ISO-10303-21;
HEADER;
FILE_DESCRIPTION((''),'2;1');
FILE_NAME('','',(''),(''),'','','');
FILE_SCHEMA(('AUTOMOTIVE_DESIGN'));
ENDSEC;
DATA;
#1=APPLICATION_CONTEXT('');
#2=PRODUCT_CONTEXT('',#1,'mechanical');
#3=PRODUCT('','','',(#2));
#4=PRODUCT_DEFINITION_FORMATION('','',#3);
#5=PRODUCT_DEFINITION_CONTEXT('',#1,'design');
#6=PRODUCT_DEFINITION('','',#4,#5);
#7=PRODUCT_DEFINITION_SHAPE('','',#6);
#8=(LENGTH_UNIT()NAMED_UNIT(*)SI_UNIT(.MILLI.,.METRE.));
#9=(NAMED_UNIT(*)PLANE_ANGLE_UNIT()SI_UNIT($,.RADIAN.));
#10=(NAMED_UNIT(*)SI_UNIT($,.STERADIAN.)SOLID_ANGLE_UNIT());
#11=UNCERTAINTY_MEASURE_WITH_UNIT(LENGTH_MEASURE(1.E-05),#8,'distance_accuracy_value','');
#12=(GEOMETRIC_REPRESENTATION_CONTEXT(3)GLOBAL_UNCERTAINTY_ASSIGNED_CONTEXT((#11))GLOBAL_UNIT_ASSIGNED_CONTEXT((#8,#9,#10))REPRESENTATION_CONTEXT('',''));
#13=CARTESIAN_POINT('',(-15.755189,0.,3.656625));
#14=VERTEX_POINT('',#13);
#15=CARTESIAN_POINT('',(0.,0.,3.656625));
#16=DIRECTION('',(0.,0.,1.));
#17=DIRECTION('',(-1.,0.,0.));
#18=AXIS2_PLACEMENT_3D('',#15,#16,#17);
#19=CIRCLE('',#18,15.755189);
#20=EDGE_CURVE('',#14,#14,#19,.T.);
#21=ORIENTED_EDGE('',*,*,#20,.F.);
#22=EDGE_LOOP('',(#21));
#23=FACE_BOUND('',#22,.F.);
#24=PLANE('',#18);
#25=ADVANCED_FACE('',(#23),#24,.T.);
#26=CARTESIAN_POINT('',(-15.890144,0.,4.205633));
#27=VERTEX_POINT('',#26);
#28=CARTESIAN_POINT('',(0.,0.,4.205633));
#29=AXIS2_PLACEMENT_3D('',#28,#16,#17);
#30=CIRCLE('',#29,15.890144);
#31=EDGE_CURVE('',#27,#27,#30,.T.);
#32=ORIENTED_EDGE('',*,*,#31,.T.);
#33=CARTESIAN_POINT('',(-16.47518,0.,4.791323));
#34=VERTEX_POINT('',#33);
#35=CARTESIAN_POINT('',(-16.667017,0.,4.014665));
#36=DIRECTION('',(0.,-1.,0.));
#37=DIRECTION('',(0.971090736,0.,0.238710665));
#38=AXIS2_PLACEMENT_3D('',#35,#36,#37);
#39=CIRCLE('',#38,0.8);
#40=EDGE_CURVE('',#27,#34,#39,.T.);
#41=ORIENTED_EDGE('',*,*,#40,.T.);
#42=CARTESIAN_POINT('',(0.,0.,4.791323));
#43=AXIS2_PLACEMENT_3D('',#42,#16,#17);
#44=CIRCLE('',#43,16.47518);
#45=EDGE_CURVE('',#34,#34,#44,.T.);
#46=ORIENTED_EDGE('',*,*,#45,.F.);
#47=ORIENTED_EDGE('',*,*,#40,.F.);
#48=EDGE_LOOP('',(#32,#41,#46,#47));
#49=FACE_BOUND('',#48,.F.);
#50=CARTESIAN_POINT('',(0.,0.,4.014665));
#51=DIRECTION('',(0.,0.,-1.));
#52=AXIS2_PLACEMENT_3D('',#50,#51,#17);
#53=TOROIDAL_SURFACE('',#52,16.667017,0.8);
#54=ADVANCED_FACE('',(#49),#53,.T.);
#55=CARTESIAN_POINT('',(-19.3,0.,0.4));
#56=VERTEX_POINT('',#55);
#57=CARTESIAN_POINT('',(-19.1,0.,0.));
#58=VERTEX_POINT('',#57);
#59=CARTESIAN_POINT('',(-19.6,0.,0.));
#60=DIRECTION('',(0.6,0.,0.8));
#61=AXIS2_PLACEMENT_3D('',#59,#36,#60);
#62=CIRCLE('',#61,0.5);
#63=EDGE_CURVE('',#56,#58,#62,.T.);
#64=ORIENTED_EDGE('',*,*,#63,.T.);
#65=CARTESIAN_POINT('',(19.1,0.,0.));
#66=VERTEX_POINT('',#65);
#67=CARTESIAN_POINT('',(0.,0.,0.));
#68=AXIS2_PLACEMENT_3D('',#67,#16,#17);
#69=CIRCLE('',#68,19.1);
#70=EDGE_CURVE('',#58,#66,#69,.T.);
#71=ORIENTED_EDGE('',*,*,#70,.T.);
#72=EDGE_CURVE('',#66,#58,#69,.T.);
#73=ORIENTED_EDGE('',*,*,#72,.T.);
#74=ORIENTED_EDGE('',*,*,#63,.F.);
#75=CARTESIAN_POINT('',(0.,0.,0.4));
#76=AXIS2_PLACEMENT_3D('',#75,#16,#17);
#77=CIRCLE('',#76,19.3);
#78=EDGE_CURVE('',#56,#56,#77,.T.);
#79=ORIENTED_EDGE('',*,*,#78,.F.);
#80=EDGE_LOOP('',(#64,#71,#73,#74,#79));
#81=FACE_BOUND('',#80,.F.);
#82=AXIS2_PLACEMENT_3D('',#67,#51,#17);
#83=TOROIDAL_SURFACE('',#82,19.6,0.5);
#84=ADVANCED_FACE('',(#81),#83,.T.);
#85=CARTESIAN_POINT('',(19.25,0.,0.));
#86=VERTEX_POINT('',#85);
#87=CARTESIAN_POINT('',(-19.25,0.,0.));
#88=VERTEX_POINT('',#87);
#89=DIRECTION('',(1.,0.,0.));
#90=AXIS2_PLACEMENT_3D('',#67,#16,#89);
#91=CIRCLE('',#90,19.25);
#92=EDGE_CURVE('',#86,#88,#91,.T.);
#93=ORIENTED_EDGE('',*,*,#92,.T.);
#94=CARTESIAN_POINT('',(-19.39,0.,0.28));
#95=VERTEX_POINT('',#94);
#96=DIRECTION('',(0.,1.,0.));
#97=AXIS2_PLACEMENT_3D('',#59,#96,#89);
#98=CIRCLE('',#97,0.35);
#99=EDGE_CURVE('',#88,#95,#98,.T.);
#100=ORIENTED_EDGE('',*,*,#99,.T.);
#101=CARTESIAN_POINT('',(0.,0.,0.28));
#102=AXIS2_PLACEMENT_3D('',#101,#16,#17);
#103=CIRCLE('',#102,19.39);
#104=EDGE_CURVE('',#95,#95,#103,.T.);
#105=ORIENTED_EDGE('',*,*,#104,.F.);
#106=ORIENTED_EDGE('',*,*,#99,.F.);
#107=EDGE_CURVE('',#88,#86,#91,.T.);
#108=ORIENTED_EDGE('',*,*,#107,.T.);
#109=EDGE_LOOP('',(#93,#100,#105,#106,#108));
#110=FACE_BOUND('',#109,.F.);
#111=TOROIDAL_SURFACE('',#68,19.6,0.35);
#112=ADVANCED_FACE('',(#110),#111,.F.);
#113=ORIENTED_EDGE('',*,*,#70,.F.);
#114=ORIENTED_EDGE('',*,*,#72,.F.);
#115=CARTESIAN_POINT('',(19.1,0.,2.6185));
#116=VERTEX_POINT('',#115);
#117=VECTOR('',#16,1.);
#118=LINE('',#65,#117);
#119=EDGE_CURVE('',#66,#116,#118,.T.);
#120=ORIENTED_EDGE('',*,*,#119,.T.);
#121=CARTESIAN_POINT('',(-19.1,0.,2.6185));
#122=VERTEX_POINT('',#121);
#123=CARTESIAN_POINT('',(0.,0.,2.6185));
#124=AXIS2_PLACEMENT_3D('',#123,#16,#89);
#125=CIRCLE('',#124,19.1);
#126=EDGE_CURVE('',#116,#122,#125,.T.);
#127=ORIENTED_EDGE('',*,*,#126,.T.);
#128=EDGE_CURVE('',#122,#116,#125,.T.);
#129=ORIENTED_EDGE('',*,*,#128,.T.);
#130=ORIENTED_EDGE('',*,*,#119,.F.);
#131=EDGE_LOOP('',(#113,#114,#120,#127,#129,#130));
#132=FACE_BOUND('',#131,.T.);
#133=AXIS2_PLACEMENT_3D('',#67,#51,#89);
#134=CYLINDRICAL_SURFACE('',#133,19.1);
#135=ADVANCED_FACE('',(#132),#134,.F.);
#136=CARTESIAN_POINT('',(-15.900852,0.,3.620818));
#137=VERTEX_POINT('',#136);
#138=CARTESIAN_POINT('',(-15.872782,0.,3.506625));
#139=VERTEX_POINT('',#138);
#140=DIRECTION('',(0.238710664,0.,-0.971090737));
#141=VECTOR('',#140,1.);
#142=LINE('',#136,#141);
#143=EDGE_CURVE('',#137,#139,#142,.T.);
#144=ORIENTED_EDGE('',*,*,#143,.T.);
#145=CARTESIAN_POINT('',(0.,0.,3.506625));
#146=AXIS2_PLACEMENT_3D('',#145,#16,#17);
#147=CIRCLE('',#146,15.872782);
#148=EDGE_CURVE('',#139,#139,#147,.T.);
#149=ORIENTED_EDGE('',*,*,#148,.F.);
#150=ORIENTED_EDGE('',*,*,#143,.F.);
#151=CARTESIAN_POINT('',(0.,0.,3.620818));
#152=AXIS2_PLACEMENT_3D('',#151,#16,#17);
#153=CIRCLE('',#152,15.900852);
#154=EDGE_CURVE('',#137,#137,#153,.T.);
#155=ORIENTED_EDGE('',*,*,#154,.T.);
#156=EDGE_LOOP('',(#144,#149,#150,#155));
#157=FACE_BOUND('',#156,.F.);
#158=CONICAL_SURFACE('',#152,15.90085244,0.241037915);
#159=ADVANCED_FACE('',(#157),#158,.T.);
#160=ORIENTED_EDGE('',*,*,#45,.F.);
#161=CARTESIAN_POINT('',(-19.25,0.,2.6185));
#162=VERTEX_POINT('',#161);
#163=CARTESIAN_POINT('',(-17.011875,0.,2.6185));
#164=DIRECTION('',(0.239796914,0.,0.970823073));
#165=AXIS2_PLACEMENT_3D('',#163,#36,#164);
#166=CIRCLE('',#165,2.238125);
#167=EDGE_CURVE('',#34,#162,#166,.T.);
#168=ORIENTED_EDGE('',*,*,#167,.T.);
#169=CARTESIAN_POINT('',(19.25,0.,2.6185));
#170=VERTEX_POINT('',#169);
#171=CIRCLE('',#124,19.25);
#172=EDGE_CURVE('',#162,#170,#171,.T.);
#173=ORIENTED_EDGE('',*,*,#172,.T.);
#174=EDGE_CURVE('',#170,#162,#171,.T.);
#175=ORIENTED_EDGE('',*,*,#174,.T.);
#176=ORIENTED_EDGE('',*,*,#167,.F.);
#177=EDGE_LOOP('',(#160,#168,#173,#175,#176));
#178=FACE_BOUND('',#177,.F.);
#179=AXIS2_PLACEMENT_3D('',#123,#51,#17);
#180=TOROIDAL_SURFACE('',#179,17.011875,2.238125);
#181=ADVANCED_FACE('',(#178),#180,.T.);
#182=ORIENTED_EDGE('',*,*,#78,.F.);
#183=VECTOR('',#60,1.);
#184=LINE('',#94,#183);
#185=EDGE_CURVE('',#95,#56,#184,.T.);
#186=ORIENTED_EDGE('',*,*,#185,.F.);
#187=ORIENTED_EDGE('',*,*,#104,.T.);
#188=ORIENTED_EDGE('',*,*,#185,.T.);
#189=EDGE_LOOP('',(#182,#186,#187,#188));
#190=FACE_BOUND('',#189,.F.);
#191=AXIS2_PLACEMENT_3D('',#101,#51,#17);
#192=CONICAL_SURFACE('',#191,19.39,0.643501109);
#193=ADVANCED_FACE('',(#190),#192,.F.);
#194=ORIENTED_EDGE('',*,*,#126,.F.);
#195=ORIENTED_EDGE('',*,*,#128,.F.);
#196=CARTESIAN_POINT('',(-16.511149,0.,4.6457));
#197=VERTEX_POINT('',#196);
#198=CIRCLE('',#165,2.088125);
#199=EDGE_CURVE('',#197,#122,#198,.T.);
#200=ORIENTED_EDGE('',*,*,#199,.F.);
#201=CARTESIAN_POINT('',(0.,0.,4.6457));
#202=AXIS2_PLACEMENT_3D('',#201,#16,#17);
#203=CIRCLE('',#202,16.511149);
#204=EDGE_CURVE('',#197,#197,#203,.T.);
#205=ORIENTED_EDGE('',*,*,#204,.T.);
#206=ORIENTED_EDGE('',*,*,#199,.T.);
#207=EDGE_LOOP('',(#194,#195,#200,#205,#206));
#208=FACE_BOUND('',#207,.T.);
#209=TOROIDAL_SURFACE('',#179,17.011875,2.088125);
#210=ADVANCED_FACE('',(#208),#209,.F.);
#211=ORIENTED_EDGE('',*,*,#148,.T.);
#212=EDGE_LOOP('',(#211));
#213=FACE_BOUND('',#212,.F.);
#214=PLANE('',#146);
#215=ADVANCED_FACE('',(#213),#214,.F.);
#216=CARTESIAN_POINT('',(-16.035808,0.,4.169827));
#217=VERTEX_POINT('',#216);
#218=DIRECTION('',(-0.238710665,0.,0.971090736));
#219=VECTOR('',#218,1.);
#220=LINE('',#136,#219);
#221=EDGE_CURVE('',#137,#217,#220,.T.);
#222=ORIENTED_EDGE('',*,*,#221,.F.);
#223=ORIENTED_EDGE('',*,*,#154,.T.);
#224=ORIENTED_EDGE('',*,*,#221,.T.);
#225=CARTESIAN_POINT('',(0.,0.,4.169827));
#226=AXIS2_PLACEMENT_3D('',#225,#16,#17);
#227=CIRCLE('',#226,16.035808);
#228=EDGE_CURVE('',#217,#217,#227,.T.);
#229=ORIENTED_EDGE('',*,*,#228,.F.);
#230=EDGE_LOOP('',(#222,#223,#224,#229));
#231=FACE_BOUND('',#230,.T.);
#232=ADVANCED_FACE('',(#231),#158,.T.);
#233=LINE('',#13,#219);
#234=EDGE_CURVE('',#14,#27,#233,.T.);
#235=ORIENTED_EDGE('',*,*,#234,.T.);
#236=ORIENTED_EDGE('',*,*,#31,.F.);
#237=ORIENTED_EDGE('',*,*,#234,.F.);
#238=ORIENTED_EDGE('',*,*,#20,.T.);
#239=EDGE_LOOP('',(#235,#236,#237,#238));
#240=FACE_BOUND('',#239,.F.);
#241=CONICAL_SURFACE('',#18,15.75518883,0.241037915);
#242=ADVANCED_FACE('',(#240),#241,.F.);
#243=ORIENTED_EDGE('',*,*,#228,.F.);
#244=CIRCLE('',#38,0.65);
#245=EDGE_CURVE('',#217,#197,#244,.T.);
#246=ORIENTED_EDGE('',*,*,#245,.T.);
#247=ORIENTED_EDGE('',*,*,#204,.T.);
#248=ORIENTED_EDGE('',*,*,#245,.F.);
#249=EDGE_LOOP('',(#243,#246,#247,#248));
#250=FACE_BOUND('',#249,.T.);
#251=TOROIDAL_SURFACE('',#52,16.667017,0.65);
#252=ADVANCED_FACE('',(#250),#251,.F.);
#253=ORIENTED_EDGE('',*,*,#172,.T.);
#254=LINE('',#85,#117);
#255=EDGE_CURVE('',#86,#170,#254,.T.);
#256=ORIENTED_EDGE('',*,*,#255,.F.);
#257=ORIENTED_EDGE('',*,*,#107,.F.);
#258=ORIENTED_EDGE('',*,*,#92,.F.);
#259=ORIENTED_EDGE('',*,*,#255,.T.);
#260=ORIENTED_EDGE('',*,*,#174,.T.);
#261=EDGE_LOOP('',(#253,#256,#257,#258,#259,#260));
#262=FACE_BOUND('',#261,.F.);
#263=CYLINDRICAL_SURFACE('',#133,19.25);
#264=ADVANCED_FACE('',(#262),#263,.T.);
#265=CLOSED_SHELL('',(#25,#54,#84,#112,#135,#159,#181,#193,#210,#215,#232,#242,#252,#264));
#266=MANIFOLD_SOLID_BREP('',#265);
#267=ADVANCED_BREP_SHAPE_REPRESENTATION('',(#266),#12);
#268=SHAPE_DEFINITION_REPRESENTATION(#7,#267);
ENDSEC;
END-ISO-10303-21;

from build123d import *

# Parameters (mm, degrees)
F0_R     = 19.25
F1_DEPTH = 2.6185
F6_T     = 0.15


# Not quite as in the source:
# - a shell that OpenCascade refuses in one call is made with other operations: the cavity is built on its own and cut out


with BuildPart() as f1:
    # F0 (on Top) → F1 (new body)
    with BuildSketch(Plane.XY):
        Circle(F0_R)
    extrude(amount=F1_DEPTH)

    # F2 (on Front) → F3 (revolve)
    with BuildSketch(Plane.XZ):
        with BuildLine():
            Line((-19.39, 0.28), (-19.3, 0.4))
            ThreePointArc((-19.3, 0.4), (-20.0472135955, -0.2236067977), (-19.1, 0))
            Line((-19.1, 0), (-19.25, 0))
            ThreePointArc((-19.25, 0), (-19.9130495168, -0.1565247584), (-19.39, 0.28))
        make_face()
    revolve(axis=Axis((0, 0, 0), (0, 0, 1)))

    # F4 (on Front) → F5 (revolve)
    with BuildSketch(Plane.XZ):
        with BuildLine():
            ThreePointArc((-15.8901444738, 4.2056334644), (-16.1010152989, 4.5800338413), (-16.4751795318, 4.7913233913))
            ThreePointArc((-16.4751795318, 4.7913233913), (-18.3917322337, 4.3806570674), (-19.25, 2.6185))
            Line((-19.25, 2.6185), (-15.5, 2.6185))
            Line((-15.5, 2.6185), (0, 2.6185))
            Line((0, 2.6185), (0, 3.656625))
            Line((0, 3.656625), (-15.75518883, 3.656625))
            Line((-15.75518883, 3.656625), (-15.8901444738, 4.2056334644))
        make_face()
    revolve(axis=Axis((0, 0, 2.6185), (0, 0, 1)))

    # F6: shell of thickness 0.15, made by hand


with BuildPart() as f6_core1:
    # F6_t2: copy of F1
    add(f1.part)

    # the walls: a layer under each face that stays
    f6_faces = [f6_core1.faces().sort_by_distance(p)[0] for p in [
        (-19.25, 0, 1.30925),
        (18.3917322337, 0, 4.3806570674),
        (19.9130495168, 0, -0.1565247584),
        (16.1010152989, 0, 4.5800338413),
        (19.345, 0, 0.34),
        (15.8226666519, 0, 3.9311292322),
        (20.0472135955, 0, -0.2236067977),
        (0, 0, 3.656625),
    ]]
    thicken(f6_faces, amount=-F6_T, mode=Mode.SUBTRACT)

    # F6_s3 → F6_t4 (revolve, cut)
    with BuildSketch(Plane.XZ):
        Polygon((-15.7537321939, 3.658483066), (-15.9008524405, 3.6208184003), (-15.8727817552, 3.506625), (-15.75518883, 3.506625), align=None)
    revolve(axis=Axis((0, 0, 3.656625), (0, 0, 1)), mode=Mode.SUBTRACT)


with BuildPart() as f1_1:
    add(f1.part)

    # what is left inside the walls is the cavity
    f6_cavity = [f6_core1.part.solids().sort_by_distance(p)[0] for p in [
        (0, -6.366667, 0.0015),
    ]]
    add(f6_cavity, mode=Mode.SUBTRACT)


solid = f1_1.part
